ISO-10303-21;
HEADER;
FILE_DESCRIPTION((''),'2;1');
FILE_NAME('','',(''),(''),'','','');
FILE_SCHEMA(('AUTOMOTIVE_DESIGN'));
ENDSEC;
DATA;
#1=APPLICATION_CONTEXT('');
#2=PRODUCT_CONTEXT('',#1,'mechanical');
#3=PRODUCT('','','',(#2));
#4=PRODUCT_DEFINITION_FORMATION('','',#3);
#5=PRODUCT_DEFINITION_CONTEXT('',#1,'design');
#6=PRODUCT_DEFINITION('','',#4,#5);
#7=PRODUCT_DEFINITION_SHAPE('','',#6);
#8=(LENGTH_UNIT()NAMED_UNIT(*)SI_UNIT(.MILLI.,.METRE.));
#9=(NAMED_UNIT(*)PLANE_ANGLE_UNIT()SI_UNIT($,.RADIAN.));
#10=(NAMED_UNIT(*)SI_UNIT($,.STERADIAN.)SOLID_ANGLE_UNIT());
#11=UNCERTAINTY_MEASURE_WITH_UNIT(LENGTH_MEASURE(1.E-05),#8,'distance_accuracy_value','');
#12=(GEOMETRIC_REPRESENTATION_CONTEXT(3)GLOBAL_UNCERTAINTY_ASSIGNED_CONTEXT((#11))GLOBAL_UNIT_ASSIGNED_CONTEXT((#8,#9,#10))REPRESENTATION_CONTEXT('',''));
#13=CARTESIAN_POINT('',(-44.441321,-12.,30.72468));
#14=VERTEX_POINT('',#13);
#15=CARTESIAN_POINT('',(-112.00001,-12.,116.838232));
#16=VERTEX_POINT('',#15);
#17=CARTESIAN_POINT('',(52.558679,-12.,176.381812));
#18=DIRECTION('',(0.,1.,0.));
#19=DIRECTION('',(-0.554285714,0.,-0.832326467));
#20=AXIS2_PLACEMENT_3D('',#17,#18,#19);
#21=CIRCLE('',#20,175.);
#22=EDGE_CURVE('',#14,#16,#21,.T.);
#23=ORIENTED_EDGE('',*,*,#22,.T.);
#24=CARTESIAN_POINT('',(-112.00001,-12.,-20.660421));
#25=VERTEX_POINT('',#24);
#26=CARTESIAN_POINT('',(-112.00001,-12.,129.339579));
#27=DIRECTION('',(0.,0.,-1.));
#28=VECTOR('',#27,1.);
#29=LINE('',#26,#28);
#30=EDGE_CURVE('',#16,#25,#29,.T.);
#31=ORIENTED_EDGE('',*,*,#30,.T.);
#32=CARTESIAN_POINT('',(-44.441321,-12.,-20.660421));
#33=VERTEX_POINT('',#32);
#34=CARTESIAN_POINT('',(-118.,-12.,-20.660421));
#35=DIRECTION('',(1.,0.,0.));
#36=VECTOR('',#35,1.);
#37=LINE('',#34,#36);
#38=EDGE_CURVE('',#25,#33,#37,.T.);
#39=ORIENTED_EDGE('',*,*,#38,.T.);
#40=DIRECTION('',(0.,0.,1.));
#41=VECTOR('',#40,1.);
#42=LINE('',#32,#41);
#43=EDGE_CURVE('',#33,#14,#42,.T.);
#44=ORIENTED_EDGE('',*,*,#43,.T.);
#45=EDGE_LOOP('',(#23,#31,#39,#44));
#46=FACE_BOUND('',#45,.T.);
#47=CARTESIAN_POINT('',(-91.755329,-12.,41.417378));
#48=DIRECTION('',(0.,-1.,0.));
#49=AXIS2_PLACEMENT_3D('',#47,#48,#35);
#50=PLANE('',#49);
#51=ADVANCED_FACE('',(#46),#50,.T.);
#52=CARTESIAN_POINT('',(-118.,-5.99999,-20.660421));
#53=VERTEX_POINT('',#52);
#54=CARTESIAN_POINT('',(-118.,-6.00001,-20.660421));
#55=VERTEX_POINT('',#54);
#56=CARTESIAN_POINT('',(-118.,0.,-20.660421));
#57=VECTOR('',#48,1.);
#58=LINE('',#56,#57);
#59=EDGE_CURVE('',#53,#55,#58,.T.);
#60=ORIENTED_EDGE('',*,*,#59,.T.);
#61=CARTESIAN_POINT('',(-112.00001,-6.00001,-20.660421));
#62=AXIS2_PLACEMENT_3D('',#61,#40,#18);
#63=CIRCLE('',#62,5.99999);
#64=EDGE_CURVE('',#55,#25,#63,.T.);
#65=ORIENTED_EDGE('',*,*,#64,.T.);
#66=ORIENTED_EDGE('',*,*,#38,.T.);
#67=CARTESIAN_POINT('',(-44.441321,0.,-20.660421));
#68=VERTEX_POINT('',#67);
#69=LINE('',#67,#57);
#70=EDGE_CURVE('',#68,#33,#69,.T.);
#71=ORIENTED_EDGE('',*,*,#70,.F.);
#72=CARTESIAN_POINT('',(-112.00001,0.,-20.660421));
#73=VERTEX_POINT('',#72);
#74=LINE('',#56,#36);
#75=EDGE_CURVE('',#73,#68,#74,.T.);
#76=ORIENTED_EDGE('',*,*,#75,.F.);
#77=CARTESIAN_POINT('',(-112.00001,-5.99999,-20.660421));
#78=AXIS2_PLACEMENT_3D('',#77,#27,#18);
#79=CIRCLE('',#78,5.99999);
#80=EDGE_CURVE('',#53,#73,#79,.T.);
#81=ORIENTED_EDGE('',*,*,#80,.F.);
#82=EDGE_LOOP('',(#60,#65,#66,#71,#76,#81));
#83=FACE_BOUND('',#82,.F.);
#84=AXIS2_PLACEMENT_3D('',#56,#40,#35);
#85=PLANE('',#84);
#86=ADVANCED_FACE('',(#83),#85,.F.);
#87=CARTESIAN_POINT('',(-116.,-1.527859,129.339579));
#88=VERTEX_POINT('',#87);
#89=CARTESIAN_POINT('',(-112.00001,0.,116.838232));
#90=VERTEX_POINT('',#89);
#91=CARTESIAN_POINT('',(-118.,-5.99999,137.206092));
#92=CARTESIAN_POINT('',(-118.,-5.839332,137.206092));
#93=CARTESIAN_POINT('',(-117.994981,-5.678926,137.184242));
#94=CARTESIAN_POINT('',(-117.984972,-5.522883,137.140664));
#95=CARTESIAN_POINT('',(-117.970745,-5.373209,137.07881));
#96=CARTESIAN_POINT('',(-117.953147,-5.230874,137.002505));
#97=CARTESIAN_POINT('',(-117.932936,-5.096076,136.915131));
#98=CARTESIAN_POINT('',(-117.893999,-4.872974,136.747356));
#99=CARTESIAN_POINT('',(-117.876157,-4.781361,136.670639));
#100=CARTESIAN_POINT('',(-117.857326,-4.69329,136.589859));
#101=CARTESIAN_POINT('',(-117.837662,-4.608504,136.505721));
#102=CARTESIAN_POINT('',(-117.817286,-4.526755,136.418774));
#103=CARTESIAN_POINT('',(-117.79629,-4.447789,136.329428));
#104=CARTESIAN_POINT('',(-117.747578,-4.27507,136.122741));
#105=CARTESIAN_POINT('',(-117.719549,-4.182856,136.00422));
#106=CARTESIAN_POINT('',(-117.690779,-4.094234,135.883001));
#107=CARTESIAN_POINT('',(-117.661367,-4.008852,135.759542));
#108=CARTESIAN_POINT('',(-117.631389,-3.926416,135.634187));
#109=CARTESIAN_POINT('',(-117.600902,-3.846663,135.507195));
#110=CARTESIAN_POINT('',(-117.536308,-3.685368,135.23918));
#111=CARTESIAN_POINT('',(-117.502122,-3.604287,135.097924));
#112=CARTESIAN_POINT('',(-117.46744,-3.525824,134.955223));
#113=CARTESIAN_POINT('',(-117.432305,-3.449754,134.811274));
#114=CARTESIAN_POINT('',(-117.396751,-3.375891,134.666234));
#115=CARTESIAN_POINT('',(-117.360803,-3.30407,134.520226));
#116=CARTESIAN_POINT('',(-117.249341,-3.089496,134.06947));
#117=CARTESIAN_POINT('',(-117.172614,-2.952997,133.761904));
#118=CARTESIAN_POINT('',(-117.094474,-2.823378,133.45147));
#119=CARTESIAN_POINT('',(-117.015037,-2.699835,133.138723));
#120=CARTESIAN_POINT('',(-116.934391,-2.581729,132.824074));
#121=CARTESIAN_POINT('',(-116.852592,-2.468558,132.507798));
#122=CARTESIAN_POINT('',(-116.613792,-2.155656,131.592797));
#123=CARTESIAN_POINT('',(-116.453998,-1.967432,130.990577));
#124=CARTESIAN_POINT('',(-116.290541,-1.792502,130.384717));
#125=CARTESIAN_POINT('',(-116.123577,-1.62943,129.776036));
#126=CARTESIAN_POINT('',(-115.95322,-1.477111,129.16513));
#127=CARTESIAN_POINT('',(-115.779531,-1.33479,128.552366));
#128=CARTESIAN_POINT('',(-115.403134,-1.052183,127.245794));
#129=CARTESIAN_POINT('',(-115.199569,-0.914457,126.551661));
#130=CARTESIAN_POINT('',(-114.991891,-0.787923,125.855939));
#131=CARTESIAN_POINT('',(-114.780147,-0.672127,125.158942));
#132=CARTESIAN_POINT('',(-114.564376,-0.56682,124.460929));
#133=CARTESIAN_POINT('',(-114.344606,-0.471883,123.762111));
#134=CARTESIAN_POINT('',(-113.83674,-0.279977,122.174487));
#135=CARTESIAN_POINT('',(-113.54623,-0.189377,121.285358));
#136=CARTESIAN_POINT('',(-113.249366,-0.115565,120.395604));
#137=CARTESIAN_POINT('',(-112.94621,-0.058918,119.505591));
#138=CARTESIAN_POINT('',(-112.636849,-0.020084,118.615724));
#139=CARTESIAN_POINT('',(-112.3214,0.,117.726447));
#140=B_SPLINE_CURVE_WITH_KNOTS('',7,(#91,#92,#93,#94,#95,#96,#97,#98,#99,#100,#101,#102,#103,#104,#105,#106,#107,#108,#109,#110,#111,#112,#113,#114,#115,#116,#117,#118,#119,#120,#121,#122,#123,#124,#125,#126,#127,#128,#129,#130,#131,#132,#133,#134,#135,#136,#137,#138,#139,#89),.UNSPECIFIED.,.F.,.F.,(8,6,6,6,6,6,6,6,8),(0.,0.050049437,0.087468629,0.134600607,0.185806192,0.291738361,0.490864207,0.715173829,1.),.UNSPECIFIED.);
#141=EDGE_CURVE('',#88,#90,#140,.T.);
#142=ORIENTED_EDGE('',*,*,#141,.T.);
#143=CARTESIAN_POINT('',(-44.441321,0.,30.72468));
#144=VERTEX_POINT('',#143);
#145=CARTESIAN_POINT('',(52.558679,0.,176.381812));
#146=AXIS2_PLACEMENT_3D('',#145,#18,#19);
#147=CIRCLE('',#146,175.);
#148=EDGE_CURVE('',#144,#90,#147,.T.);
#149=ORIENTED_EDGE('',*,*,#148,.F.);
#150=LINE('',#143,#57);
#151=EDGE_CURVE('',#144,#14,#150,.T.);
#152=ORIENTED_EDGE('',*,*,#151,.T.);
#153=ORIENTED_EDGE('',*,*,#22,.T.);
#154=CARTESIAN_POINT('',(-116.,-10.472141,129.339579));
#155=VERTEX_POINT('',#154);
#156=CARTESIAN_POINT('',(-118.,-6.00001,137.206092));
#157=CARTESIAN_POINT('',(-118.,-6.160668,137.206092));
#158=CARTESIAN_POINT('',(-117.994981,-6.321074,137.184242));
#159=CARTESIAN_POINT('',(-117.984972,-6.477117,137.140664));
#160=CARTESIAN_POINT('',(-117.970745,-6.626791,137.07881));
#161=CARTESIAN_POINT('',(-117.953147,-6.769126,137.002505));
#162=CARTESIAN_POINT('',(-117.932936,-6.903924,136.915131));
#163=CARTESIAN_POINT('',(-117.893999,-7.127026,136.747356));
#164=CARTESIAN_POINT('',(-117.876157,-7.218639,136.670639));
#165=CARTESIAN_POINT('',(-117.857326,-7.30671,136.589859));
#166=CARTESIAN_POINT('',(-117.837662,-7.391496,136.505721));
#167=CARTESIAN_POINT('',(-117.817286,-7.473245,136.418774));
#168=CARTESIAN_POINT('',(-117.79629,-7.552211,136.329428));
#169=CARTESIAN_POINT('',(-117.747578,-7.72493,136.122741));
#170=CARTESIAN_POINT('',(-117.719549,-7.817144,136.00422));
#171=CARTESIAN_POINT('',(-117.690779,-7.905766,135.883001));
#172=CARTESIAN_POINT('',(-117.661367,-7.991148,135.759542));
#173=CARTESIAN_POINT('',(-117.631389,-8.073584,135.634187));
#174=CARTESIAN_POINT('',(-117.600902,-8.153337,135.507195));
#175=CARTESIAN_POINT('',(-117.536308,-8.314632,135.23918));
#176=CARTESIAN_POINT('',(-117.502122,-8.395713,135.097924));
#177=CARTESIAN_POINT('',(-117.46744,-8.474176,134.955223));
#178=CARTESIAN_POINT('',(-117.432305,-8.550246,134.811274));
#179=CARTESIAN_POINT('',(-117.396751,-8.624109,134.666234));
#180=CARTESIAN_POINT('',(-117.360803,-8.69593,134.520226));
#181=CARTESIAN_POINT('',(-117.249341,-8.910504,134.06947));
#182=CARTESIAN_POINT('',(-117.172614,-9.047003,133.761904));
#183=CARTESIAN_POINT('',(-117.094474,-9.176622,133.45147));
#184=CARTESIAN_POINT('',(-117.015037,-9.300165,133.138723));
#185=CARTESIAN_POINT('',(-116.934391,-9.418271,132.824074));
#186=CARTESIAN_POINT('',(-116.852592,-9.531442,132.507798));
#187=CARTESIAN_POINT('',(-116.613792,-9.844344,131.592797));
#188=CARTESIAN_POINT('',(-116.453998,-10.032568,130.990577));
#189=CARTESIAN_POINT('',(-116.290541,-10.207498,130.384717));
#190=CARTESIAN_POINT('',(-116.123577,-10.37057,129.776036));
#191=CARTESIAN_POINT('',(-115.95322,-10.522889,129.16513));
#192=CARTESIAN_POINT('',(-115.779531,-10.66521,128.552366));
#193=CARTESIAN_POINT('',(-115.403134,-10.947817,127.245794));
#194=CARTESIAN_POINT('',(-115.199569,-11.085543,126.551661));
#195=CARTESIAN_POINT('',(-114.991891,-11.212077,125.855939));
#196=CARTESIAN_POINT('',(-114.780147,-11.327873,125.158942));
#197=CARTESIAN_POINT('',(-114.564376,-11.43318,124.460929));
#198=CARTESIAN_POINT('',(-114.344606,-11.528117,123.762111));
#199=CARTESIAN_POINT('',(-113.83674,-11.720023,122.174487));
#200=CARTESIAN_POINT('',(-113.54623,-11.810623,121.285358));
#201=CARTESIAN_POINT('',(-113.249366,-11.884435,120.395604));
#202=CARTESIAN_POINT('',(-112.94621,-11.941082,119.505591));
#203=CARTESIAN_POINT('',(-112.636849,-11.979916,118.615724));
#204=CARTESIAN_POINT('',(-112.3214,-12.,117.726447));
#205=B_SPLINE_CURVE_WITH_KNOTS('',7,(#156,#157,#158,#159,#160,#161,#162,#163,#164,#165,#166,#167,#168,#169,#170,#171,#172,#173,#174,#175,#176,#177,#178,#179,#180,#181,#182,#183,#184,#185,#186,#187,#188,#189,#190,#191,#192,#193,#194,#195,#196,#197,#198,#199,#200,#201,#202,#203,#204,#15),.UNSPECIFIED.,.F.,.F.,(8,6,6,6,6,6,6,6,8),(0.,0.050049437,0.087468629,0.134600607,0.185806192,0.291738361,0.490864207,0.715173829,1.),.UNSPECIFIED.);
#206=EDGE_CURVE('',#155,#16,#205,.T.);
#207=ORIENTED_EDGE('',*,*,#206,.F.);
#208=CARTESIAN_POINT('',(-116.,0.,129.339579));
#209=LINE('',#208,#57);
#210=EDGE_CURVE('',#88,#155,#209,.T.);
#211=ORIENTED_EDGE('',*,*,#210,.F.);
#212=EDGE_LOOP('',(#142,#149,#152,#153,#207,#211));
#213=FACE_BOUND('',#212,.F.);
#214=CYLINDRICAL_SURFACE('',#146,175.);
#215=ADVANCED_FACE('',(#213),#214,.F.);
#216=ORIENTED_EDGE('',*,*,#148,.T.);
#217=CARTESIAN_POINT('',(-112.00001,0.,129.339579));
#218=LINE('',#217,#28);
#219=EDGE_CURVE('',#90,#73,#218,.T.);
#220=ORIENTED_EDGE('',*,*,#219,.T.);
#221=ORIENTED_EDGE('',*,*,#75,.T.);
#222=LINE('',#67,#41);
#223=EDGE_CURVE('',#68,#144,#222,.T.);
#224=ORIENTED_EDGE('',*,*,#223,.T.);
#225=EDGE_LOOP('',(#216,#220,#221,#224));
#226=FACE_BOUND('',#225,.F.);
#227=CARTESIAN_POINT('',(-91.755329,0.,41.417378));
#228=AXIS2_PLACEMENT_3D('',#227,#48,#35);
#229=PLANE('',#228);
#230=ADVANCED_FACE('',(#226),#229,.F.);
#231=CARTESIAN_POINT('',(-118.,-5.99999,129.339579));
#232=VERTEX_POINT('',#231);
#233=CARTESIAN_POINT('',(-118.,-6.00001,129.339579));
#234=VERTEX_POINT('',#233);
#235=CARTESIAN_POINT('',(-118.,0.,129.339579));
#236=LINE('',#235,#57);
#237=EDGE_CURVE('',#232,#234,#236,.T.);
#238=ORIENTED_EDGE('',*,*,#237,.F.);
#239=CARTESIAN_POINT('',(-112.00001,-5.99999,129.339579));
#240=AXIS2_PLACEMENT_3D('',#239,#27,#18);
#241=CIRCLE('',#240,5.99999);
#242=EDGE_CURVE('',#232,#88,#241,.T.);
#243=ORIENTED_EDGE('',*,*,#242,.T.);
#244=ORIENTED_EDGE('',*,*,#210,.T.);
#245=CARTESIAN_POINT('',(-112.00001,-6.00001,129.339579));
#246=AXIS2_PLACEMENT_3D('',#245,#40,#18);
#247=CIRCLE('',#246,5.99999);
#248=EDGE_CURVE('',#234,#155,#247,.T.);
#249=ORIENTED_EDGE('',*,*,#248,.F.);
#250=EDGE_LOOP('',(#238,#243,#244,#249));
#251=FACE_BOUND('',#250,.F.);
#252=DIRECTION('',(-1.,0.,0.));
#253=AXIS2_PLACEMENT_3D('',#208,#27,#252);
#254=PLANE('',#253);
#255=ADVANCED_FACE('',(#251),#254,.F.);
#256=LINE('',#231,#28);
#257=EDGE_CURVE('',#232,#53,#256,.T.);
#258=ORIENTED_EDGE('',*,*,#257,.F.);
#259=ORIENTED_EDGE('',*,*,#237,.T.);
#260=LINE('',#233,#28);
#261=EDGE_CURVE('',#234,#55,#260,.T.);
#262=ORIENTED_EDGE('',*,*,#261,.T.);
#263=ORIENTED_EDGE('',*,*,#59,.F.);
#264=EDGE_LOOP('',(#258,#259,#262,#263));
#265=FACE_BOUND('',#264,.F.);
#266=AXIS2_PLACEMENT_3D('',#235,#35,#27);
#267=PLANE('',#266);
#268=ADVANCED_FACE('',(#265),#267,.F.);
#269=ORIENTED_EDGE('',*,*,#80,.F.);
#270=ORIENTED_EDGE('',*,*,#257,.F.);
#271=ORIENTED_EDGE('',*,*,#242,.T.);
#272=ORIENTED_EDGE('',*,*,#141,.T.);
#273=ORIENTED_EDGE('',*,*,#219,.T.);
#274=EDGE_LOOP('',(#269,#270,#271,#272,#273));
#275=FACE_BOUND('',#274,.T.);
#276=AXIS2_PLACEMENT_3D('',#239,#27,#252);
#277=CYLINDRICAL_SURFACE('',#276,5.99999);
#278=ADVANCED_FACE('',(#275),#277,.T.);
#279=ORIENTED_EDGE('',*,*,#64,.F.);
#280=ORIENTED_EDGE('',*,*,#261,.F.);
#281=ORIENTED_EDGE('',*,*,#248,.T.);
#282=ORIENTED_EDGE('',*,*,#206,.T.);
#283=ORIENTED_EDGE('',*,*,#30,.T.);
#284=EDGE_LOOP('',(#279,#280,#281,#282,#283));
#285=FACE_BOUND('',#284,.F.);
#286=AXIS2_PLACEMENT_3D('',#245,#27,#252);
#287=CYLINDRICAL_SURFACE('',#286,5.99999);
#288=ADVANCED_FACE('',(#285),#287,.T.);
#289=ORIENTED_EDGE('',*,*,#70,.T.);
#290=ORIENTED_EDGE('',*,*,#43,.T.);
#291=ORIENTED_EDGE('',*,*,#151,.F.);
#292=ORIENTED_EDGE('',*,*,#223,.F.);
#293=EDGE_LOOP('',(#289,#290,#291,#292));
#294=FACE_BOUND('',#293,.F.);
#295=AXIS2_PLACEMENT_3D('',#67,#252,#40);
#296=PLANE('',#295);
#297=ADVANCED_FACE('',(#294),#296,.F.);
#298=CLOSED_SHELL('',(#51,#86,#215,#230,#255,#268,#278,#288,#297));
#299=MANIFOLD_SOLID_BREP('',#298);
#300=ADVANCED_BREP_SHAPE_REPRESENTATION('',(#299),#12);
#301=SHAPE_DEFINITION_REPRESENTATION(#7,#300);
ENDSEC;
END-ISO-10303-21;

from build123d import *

# Parameters (mm, degrees)
F1_DEPTH = 12
F2_R     = 5.99999


# Not quite as in the source:
# - a fillet or chamfer is up to 0.001 mm smaller than in the source, because OpenCascade refuses the exact size


with BuildPart() as f1:
    # F0 (on Front) → F1 (new body)
    with BuildSketch(Plane.XZ):
        with BuildLine():
            Line((-118, -20.6604213454), (-44.4413209303, -20.6604213454))
            Line((-44.4413209303, -20.6604213454), (-44.4413209303, 30.7246802683))
            ThreePointArc((-44.4413209303, 30.7246802683), (-89.0802193772, 73.6033003164), (-116, 129.3395786546))
            Line((-116, 129.3395786546), (-118, 129.3395786546))
            Line((-118, 129.3395786546), (-118, -20.6604213454))
        make_face()
    extrude(amount=F1_DEPTH)

    # F2 (radius 6 in the source; OpenCascade refuses exactly that, so slightly less here)
    f2_edges = [f1.edges().sort_by_distance(p)[0] for p in [
        (-118, 0, 54.339579),
        (-118, -12, 54.339579),
    ]]
    fillet(f2_edges, radius=F2_R)


solid = f1.part
